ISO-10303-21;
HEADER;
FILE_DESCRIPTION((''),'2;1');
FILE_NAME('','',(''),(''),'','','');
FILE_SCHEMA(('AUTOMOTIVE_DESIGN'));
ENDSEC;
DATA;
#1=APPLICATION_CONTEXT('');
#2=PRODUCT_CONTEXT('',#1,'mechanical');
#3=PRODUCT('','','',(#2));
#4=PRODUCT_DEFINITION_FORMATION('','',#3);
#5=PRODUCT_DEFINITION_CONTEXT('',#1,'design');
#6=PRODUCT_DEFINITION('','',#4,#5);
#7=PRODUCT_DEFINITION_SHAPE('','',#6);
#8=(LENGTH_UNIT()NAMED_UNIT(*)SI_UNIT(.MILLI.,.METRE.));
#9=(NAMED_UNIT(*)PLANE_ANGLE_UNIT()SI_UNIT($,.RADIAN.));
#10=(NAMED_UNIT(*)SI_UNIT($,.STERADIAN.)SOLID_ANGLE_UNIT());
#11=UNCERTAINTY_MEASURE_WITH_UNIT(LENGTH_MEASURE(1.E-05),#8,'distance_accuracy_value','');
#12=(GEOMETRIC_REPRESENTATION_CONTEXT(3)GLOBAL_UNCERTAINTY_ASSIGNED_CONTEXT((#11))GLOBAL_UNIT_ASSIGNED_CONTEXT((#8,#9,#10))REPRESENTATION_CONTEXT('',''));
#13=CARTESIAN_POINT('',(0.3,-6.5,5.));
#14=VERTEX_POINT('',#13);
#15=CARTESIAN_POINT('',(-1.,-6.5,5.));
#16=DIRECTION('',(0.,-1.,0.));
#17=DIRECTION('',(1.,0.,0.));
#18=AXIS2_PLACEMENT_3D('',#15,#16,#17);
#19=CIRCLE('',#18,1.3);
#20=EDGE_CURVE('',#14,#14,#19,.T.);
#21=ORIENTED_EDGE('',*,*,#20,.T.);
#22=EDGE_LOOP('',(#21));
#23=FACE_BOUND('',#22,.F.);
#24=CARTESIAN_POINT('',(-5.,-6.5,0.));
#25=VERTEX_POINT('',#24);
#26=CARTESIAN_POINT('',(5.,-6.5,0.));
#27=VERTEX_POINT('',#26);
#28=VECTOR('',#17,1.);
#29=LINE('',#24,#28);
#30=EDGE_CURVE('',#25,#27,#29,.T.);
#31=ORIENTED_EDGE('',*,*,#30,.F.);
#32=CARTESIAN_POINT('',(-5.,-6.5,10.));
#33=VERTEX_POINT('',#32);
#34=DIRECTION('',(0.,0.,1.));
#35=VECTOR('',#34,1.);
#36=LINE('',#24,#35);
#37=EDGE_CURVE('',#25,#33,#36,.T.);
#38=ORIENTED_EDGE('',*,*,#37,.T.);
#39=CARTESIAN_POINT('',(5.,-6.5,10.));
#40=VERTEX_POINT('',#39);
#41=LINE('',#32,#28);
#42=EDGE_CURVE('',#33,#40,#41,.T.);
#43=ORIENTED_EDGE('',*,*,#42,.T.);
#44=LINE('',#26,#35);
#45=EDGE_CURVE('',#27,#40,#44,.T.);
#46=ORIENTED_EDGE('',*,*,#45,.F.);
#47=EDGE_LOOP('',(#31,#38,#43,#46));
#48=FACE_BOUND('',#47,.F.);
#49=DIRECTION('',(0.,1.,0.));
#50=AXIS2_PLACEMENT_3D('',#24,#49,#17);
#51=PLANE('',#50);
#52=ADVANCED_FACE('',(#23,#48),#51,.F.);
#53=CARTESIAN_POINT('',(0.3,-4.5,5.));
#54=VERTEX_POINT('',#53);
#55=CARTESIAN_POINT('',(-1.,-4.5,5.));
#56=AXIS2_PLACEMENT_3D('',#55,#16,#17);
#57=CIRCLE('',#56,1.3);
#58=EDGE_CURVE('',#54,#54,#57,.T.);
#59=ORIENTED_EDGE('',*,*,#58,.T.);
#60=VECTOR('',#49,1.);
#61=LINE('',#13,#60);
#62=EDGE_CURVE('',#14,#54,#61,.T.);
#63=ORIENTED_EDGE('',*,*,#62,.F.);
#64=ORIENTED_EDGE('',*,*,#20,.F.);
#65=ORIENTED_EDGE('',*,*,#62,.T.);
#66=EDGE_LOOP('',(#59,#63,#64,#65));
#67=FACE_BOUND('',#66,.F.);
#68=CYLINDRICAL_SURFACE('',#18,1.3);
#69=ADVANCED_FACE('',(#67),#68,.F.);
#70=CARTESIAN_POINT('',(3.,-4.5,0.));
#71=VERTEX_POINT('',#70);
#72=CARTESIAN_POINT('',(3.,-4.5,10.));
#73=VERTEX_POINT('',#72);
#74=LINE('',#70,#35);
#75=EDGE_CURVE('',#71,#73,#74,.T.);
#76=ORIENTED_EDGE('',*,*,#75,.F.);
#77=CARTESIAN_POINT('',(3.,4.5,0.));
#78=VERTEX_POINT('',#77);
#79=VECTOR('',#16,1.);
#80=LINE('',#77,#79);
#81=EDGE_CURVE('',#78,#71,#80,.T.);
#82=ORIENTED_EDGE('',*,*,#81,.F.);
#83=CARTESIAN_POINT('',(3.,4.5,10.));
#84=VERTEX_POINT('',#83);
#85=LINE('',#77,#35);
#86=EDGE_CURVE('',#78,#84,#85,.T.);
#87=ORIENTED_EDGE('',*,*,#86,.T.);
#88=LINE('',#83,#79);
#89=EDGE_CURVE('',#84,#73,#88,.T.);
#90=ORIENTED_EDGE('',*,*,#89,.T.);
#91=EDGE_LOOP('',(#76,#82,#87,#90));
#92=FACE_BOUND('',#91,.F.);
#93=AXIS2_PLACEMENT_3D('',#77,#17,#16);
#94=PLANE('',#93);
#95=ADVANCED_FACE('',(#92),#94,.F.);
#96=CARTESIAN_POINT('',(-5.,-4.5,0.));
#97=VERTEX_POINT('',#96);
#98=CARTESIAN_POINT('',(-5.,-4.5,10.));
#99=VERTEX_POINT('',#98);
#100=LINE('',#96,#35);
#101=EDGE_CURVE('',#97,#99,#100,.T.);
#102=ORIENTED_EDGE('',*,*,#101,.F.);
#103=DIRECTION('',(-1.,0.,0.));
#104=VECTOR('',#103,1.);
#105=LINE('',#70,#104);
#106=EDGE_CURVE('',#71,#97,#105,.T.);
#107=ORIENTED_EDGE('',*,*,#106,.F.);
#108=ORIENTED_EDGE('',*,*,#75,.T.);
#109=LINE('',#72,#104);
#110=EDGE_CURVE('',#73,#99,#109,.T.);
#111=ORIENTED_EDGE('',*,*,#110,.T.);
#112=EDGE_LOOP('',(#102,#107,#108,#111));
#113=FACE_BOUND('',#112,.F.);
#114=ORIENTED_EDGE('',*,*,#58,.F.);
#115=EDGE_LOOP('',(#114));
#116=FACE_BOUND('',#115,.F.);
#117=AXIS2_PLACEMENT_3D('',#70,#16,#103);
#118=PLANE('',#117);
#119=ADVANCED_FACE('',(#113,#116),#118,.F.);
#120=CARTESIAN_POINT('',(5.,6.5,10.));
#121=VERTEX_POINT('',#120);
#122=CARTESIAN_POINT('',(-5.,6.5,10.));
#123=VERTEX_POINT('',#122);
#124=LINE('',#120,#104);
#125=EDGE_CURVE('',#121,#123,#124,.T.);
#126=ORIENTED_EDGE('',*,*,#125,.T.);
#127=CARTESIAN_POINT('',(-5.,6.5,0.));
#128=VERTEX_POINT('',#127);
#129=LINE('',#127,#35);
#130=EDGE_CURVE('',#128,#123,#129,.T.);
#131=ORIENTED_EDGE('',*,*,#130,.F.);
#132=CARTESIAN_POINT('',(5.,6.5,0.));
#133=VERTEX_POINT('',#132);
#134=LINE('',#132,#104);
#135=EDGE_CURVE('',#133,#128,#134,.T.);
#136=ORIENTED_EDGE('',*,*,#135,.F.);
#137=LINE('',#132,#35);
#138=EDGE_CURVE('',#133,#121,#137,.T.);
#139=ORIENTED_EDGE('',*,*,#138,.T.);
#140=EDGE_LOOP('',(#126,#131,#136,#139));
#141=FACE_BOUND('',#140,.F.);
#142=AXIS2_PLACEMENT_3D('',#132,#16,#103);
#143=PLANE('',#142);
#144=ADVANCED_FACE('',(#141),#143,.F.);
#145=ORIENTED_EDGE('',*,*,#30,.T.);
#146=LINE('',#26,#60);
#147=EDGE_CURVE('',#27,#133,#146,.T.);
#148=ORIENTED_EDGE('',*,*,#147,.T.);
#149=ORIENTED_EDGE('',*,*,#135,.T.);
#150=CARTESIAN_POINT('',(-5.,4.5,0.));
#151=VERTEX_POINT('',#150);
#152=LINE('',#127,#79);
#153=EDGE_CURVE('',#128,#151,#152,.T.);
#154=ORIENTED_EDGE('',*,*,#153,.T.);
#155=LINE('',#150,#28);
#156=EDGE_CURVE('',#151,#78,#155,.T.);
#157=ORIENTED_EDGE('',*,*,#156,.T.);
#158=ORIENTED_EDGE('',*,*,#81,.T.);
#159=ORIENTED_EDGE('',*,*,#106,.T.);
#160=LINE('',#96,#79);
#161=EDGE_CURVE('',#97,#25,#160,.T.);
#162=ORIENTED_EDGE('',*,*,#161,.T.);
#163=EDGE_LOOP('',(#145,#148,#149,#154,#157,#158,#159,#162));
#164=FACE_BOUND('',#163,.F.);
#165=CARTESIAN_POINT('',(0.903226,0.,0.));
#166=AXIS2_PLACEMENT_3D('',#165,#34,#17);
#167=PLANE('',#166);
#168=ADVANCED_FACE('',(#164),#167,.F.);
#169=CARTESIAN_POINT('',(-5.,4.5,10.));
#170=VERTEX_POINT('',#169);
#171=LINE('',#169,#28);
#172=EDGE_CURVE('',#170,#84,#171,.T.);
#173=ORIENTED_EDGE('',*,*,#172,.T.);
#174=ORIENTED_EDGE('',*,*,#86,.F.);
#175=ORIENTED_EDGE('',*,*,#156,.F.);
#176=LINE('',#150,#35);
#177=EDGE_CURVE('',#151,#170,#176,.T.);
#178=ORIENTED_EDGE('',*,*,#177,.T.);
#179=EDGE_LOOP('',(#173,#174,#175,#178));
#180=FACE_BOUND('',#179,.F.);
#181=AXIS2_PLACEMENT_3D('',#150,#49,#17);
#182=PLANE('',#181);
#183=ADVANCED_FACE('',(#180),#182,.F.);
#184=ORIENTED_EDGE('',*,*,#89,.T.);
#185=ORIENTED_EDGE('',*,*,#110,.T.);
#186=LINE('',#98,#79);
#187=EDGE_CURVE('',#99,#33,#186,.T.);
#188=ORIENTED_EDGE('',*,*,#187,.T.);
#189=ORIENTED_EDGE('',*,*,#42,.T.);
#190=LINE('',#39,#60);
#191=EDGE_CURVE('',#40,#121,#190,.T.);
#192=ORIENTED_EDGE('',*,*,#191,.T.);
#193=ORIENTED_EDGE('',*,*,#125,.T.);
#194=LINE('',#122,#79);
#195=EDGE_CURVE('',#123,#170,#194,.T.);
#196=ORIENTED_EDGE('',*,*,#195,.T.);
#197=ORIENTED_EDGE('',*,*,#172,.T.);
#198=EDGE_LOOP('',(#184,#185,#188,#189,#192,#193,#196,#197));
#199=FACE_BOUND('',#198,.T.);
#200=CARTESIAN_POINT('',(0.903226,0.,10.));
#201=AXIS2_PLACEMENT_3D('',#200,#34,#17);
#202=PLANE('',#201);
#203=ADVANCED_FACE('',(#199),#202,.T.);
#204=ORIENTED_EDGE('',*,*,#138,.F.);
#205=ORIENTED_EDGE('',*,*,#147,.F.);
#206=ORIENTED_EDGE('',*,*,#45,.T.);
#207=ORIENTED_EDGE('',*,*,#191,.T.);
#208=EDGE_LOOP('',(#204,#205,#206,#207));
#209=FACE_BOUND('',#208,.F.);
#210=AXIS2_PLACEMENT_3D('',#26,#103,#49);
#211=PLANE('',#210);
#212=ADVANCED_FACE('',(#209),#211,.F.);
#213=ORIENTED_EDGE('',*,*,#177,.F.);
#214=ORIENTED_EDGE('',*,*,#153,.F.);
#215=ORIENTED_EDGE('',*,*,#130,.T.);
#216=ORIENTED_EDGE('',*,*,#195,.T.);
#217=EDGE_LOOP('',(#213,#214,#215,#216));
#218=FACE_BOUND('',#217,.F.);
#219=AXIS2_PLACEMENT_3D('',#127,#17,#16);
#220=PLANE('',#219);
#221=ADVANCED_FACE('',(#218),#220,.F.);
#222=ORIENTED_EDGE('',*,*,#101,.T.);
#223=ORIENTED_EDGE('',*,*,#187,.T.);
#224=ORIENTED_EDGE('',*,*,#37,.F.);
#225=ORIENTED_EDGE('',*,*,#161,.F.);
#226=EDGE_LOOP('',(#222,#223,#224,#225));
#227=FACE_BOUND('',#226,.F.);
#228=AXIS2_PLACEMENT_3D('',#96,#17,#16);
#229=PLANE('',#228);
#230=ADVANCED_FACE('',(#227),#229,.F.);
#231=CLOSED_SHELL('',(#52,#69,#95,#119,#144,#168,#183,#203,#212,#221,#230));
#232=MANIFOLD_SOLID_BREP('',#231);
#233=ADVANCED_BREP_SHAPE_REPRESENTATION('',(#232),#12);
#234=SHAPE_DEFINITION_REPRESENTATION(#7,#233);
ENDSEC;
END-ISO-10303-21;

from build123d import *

# Parameters (mm, degrees)
F1_DEPTH = 10
F2_R     = 1.3
F3_DEPTH = 2


# Not quite as in the source:
# - a feature names something its author has since deleted; it is built from what else it names


with BuildPart() as f1:
    # F0 (on Top) → F1 (new body)
    with BuildSketch(Plane.XY):
        Polygon((-5, -6.5), (5, -6.5), (5, 6.5), (-5, 6.5), (-5, 4.5), (-3, 4.5), (3, 4.5), (3, -4.5), (-3, -4.5), (-5, -4.5), align=None)
    extrude(amount=F1_DEPTH)

    # F2 (on face) → F3 (cut, through all)
    with BuildSketch(Plane.XZ.offset(6.5)):
        with Locations((-1, 5)):
            Circle(F2_R)
    extrude(amount=-F3_DEPTH, mode=Mode.SUBTRACT)


solid = f1.part
